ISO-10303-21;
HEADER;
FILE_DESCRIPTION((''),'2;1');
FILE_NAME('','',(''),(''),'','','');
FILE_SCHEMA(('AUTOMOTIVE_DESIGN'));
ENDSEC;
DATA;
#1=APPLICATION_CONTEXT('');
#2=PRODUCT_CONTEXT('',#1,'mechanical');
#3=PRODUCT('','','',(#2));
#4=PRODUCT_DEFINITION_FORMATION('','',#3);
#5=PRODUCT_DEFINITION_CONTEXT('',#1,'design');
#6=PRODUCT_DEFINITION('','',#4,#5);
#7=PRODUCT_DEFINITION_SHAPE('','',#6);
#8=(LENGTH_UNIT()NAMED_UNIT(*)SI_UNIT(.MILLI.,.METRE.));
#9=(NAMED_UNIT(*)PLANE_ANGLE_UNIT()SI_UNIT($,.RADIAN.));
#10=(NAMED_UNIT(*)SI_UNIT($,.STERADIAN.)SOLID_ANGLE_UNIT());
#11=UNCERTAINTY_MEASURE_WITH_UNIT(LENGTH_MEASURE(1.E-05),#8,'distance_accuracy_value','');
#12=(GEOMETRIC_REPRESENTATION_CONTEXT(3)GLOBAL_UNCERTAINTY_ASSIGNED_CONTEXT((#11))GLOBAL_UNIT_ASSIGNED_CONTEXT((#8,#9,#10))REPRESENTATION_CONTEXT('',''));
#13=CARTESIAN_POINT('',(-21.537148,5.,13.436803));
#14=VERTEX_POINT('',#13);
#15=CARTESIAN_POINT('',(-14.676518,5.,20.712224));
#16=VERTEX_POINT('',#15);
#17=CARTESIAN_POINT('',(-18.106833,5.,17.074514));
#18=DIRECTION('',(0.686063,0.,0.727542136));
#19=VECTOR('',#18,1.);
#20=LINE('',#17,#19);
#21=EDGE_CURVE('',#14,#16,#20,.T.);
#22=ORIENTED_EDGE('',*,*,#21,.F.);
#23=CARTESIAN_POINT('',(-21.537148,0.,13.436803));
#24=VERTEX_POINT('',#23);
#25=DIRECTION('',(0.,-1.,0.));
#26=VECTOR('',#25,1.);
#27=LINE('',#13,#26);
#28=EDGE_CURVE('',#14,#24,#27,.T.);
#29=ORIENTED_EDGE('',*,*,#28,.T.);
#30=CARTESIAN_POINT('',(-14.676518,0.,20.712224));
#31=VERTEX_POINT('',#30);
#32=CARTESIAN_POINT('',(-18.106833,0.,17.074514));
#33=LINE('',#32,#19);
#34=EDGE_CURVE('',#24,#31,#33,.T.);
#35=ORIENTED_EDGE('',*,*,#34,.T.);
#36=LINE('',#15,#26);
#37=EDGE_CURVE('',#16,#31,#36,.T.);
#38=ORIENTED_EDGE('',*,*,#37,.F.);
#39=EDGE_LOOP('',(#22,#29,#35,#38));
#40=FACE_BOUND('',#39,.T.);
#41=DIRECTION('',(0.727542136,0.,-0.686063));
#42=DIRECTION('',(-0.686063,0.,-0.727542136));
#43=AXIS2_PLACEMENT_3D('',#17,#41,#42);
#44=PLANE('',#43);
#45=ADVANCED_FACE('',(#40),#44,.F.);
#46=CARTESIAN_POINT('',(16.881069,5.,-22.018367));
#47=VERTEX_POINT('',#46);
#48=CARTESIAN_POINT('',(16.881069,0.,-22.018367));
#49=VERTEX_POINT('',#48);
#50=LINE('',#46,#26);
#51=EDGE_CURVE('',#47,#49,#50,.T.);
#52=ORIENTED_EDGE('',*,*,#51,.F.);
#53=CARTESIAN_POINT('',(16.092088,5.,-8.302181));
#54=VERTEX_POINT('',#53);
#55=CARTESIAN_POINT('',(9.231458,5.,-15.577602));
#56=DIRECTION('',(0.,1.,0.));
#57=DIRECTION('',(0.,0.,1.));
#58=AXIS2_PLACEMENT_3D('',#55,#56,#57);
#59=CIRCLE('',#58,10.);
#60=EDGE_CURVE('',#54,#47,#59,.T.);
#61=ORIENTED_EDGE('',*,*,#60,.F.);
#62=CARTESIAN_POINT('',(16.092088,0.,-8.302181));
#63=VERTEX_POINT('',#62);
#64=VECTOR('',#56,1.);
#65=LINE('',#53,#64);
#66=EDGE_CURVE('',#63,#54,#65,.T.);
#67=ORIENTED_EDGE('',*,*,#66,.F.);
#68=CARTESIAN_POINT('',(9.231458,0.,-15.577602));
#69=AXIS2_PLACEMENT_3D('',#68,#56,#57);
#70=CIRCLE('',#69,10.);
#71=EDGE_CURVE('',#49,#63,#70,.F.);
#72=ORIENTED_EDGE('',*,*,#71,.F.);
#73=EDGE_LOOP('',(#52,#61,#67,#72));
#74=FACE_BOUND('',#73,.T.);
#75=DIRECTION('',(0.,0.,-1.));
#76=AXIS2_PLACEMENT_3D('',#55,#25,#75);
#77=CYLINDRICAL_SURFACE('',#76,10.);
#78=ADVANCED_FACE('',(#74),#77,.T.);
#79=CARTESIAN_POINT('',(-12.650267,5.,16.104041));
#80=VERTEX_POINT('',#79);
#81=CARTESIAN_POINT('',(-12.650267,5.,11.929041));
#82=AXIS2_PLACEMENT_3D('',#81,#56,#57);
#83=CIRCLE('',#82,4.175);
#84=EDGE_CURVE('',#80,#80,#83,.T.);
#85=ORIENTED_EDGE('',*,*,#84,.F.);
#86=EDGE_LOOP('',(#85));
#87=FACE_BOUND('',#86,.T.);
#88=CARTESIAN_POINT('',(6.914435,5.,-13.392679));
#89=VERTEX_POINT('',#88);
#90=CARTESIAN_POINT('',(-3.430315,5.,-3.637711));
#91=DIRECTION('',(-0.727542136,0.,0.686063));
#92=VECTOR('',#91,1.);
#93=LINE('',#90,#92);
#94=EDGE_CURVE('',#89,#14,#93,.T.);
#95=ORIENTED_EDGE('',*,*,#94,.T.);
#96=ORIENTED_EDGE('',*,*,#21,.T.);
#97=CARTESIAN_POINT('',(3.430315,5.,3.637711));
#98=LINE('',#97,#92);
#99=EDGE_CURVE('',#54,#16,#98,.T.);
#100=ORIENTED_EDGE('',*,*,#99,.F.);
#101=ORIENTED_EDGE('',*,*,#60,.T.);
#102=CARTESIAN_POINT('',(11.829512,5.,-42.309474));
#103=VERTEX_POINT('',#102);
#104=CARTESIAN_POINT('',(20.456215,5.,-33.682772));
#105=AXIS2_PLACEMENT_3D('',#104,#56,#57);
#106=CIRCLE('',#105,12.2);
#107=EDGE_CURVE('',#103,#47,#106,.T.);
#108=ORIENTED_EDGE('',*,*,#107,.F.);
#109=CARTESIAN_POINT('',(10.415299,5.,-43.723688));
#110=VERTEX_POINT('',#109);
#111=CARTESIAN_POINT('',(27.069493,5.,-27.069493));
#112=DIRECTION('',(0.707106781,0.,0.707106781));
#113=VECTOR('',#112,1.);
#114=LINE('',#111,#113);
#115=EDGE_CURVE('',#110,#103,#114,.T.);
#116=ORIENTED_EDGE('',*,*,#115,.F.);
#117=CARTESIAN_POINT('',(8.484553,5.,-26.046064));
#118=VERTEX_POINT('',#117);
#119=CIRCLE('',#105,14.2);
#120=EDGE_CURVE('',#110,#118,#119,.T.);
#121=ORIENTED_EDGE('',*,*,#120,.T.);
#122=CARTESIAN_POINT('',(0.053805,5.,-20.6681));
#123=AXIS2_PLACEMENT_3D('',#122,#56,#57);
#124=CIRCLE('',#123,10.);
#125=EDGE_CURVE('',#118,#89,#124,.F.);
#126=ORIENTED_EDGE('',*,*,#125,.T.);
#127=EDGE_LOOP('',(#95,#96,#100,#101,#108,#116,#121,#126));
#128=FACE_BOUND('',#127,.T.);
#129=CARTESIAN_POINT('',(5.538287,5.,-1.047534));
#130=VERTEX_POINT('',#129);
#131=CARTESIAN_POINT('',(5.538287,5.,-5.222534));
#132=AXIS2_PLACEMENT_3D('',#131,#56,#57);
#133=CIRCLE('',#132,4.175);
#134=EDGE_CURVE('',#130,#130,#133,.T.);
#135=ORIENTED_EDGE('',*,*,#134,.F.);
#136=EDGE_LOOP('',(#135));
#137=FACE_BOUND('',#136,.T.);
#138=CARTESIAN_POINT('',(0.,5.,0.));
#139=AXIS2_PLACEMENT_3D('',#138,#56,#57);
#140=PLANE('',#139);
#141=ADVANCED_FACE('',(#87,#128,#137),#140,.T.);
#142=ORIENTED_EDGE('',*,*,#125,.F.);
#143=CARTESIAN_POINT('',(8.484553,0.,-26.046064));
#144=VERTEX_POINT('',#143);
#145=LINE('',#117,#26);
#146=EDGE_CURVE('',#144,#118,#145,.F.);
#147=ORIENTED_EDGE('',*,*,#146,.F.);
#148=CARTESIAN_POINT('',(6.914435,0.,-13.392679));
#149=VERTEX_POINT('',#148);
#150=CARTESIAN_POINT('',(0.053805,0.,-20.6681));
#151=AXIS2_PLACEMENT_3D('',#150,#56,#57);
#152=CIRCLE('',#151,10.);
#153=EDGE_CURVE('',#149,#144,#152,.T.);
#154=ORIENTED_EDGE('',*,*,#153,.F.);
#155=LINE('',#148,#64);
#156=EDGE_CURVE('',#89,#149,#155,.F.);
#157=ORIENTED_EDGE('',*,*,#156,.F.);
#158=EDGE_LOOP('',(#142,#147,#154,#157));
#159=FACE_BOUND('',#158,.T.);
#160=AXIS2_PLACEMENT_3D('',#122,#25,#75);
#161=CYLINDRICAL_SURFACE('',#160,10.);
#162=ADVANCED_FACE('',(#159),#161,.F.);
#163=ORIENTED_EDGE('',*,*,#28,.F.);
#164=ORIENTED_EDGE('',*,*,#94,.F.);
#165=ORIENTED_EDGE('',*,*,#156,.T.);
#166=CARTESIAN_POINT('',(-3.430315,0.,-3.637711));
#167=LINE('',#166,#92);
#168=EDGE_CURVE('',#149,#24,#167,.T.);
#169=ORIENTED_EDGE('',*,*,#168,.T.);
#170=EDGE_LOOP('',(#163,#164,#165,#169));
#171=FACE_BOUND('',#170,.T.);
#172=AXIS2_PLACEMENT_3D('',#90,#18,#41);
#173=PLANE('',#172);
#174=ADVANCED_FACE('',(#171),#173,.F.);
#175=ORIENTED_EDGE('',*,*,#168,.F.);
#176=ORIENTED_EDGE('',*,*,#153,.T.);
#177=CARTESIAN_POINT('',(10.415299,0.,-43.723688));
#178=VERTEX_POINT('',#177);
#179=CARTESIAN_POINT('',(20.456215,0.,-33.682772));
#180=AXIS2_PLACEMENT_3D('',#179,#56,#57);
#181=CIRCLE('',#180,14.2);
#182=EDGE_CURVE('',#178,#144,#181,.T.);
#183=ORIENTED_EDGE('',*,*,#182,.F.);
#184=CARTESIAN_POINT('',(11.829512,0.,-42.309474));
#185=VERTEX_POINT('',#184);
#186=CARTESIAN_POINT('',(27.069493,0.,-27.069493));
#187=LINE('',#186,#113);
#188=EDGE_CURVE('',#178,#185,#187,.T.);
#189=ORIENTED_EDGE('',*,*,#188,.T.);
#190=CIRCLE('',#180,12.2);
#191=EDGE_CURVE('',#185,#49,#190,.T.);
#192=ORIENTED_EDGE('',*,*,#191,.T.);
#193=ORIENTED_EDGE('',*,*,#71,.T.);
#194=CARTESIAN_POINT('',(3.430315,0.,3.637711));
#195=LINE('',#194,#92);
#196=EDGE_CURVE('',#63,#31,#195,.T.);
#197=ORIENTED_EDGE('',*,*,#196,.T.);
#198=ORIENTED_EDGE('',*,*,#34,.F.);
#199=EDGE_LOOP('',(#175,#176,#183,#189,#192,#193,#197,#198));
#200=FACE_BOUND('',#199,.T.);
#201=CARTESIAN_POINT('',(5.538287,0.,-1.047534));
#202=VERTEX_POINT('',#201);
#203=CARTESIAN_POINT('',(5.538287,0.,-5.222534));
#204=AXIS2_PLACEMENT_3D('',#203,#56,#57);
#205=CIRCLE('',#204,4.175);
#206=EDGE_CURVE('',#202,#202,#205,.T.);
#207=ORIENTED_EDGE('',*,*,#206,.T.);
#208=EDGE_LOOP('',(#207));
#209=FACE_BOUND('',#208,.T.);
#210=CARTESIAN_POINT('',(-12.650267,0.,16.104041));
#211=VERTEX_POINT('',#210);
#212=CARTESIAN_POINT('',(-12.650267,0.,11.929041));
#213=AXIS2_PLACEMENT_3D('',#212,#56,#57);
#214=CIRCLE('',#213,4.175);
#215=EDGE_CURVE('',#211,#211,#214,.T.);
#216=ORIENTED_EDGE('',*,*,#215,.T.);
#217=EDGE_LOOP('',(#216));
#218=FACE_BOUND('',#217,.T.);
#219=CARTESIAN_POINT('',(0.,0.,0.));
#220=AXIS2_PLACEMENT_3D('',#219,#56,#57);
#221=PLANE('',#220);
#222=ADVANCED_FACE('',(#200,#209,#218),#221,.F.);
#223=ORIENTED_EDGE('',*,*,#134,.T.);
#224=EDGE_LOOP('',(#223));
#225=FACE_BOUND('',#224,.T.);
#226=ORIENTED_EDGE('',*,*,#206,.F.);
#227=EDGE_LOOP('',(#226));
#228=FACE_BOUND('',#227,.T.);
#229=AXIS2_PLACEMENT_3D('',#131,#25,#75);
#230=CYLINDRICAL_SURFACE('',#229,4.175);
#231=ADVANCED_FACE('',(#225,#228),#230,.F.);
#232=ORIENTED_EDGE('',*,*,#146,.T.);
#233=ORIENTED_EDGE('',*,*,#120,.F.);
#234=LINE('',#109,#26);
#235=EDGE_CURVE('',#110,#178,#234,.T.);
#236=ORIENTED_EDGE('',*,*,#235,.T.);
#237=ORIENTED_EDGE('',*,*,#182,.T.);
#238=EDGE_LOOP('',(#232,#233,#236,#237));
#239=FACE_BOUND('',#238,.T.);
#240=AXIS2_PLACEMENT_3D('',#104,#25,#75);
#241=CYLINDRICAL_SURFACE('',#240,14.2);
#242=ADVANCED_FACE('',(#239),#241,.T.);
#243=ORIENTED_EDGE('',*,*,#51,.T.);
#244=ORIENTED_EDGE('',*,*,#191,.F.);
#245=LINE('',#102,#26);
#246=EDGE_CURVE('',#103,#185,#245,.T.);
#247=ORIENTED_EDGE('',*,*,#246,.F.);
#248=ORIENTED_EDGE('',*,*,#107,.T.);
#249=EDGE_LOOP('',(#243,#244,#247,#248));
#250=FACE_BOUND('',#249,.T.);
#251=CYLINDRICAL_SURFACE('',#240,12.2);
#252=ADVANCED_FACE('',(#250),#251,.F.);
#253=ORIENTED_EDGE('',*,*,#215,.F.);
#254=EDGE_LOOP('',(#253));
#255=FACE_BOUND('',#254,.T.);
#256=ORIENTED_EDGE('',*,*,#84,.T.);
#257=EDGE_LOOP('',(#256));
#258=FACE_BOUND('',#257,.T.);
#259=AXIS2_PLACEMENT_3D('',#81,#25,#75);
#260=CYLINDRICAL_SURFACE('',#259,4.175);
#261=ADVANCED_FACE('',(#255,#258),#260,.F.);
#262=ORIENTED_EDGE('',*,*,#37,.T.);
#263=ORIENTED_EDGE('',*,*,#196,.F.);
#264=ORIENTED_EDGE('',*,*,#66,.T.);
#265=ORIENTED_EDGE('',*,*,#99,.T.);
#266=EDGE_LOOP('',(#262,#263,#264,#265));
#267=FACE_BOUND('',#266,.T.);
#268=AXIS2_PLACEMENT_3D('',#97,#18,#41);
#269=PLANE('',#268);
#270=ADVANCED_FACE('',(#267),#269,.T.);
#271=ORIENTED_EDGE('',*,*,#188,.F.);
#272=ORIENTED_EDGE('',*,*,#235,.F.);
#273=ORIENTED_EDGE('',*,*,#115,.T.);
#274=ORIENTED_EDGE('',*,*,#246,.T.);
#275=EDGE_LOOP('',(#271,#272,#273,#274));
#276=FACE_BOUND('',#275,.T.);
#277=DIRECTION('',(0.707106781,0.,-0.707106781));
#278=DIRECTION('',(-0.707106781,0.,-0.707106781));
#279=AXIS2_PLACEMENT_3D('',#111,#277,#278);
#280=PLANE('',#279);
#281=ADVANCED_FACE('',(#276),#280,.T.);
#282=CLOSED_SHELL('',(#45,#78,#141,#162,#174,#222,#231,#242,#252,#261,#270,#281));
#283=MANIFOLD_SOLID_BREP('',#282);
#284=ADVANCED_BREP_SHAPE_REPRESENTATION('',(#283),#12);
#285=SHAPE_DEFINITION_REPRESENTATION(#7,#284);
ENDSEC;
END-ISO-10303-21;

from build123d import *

# Parameters (mm, degrees)
SKETCH_1_R       = 4.175
EXTRUDE_1_DEPTH  = 5
FILLET_1_DEPTH   = 5
FILLET_1_2_DEPTH = 5


with BuildPart() as part:
    # ｽｹｯﾁ1 → ﾎﾞｽ - 押し出し1 (new body)
    # profile 1 of 4: a face of its own
    with BuildSketch(Plane(origin=(0, 0, 0), x_dir=(1, 0, 0), z_dir=(0, 1, 0))):
        Polygon((21.537147831, 13.436802865), (14.676517829, 20.712224225), (-21.537147831, -13.436802865), (-14.676517829, -20.712224225), align=None)
        with Locations(Location((-12.65026681, -11.929041043, 0), (0, 0, 270))):
            Circle(SKETCH_1_R, mode=Mode.SUBTRACT)
        with Locations(Location((5.538286591, 5.222533963, 0), (0, 0, 270))):
            Circle(SKETCH_1_R, mode=Mode.SUBTRACT)
    # profile 2 of 4: a face of its own
    with BuildSketch(Plane(origin=(0, 0, 0), x_dir=(1, 0, 0), z_dir=(0, 1, 0))):
        Polygon((21.537147831, 13.436802865), (-14.676517829, -20.712224225), (-21.537147831, -13.436802865), (14.676517829, 20.712224225), align=None)
        with Locations(Location((5.538286591, 5.222533963, 0), (0, 0, 270))):
            Circle(SKETCH_1_R, mode=Mode.SUBTRACT)
        with Locations(Location((-12.65026681, -11.929041043, 0), (0, 0, 270))):
            Circle(SKETCH_1_R, mode=Mode.SUBTRACT)
    # profile 3 of 4: a face of its own
    with BuildSketch(Plane(origin=(0, 0, 0), x_dir=(1, 0, 0), z_dir=(0, 1, 0))):
        with BuildLine():
            ThreePointArc((19.221377033, 19.536564594), (16.900027476, 19.935279891), (14.676517829, 20.712224225))
            Line((14.676517829, 20.712224225), (21.537147831, 13.436802865))
            ThreePointArc((21.537147831, 13.436802865), (22.425633577, 14.316933157), (23.303261531, 15.207890747))
            Line((23.303261531, 15.207890747), (19.221377033, 19.536564594))
        make_face()
    # profile 4 of 4: a face of its own
    with BuildSketch(Plane(origin=(0, 0, 0), x_dir=(1, 0, 0), z_dir=(0, 1, 0))):
        with BuildLine():
            ThreePointArc((10.415298606, 43.723687992), (6.493592725, 31.097199803), (14.676517829, 20.712224225))
            ThreePointArc((14.676517829, 20.712224225), (16.900027476, 19.935279891), (19.221377033, 19.536564594))
            Line((19.221377033, 19.536564594), (16.881068514, 22.018367371))
            ThreePointArc((16.881068514, 22.018367371), (8.617568994, 30.735491067), (11.829512169, 42.309474429))
            Line((11.829512169, 42.309474429), (10.415298606, 43.723687992))
        make_face()
    extrude(amount=EXTRUDE_1_DEPTH)

    # ﾌｨﾚｯﾄ1: read off the stored shape, not the designer's step
    # ﾌｨﾚｯﾄ1 outline → ﾌｨﾚｯﾄ1 (cut)
    with BuildSketch(Plane(origin=(0, 0, 0), x_dir=(1, 0, 0), z_dir=(0, 1, 0))):
        with BuildLine():
            Line((23.303261531, 15.207890747), (16.881068514, 22.018367371))
            ThreePointArc((16.881068514, 22.018367371), (19.214955148, 15.00333268), (16.092088027, 8.302180578))
            Line((16.092088027, 8.302180578), (21.537147831, 13.436802865))
            ThreePointArc((21.537147831, 13.436802865), (22.425633577, 14.316933157), (23.303261531, 15.207890747))
        make_face()
    extrude(amount=FILLET_1_DEPTH, mode=Mode.SUBTRACT)

    # Fillet 1 2 outline → Fillet 1 2 (add)
    with BuildSketch(Plane(origin=(0, 0, 0), x_dir=(1, 0, 0), z_dir=(0, 1, 0))):
        with BuildLine():
            ThreePointArc((14.676517829, 20.712224225), (11.188521166, 22.924061141), (8.484552975, 26.046063588))
            ThreePointArc((8.484552975, 26.046063588), (9.977695299, 19.436676513), (6.914435143, 13.39267877))
            Line((6.914435143, 13.39267877), (14.676517829, 20.712224225))
        make_face()
    extrude(amount=FILLET_1_2_DEPTH)


solid = part.part
